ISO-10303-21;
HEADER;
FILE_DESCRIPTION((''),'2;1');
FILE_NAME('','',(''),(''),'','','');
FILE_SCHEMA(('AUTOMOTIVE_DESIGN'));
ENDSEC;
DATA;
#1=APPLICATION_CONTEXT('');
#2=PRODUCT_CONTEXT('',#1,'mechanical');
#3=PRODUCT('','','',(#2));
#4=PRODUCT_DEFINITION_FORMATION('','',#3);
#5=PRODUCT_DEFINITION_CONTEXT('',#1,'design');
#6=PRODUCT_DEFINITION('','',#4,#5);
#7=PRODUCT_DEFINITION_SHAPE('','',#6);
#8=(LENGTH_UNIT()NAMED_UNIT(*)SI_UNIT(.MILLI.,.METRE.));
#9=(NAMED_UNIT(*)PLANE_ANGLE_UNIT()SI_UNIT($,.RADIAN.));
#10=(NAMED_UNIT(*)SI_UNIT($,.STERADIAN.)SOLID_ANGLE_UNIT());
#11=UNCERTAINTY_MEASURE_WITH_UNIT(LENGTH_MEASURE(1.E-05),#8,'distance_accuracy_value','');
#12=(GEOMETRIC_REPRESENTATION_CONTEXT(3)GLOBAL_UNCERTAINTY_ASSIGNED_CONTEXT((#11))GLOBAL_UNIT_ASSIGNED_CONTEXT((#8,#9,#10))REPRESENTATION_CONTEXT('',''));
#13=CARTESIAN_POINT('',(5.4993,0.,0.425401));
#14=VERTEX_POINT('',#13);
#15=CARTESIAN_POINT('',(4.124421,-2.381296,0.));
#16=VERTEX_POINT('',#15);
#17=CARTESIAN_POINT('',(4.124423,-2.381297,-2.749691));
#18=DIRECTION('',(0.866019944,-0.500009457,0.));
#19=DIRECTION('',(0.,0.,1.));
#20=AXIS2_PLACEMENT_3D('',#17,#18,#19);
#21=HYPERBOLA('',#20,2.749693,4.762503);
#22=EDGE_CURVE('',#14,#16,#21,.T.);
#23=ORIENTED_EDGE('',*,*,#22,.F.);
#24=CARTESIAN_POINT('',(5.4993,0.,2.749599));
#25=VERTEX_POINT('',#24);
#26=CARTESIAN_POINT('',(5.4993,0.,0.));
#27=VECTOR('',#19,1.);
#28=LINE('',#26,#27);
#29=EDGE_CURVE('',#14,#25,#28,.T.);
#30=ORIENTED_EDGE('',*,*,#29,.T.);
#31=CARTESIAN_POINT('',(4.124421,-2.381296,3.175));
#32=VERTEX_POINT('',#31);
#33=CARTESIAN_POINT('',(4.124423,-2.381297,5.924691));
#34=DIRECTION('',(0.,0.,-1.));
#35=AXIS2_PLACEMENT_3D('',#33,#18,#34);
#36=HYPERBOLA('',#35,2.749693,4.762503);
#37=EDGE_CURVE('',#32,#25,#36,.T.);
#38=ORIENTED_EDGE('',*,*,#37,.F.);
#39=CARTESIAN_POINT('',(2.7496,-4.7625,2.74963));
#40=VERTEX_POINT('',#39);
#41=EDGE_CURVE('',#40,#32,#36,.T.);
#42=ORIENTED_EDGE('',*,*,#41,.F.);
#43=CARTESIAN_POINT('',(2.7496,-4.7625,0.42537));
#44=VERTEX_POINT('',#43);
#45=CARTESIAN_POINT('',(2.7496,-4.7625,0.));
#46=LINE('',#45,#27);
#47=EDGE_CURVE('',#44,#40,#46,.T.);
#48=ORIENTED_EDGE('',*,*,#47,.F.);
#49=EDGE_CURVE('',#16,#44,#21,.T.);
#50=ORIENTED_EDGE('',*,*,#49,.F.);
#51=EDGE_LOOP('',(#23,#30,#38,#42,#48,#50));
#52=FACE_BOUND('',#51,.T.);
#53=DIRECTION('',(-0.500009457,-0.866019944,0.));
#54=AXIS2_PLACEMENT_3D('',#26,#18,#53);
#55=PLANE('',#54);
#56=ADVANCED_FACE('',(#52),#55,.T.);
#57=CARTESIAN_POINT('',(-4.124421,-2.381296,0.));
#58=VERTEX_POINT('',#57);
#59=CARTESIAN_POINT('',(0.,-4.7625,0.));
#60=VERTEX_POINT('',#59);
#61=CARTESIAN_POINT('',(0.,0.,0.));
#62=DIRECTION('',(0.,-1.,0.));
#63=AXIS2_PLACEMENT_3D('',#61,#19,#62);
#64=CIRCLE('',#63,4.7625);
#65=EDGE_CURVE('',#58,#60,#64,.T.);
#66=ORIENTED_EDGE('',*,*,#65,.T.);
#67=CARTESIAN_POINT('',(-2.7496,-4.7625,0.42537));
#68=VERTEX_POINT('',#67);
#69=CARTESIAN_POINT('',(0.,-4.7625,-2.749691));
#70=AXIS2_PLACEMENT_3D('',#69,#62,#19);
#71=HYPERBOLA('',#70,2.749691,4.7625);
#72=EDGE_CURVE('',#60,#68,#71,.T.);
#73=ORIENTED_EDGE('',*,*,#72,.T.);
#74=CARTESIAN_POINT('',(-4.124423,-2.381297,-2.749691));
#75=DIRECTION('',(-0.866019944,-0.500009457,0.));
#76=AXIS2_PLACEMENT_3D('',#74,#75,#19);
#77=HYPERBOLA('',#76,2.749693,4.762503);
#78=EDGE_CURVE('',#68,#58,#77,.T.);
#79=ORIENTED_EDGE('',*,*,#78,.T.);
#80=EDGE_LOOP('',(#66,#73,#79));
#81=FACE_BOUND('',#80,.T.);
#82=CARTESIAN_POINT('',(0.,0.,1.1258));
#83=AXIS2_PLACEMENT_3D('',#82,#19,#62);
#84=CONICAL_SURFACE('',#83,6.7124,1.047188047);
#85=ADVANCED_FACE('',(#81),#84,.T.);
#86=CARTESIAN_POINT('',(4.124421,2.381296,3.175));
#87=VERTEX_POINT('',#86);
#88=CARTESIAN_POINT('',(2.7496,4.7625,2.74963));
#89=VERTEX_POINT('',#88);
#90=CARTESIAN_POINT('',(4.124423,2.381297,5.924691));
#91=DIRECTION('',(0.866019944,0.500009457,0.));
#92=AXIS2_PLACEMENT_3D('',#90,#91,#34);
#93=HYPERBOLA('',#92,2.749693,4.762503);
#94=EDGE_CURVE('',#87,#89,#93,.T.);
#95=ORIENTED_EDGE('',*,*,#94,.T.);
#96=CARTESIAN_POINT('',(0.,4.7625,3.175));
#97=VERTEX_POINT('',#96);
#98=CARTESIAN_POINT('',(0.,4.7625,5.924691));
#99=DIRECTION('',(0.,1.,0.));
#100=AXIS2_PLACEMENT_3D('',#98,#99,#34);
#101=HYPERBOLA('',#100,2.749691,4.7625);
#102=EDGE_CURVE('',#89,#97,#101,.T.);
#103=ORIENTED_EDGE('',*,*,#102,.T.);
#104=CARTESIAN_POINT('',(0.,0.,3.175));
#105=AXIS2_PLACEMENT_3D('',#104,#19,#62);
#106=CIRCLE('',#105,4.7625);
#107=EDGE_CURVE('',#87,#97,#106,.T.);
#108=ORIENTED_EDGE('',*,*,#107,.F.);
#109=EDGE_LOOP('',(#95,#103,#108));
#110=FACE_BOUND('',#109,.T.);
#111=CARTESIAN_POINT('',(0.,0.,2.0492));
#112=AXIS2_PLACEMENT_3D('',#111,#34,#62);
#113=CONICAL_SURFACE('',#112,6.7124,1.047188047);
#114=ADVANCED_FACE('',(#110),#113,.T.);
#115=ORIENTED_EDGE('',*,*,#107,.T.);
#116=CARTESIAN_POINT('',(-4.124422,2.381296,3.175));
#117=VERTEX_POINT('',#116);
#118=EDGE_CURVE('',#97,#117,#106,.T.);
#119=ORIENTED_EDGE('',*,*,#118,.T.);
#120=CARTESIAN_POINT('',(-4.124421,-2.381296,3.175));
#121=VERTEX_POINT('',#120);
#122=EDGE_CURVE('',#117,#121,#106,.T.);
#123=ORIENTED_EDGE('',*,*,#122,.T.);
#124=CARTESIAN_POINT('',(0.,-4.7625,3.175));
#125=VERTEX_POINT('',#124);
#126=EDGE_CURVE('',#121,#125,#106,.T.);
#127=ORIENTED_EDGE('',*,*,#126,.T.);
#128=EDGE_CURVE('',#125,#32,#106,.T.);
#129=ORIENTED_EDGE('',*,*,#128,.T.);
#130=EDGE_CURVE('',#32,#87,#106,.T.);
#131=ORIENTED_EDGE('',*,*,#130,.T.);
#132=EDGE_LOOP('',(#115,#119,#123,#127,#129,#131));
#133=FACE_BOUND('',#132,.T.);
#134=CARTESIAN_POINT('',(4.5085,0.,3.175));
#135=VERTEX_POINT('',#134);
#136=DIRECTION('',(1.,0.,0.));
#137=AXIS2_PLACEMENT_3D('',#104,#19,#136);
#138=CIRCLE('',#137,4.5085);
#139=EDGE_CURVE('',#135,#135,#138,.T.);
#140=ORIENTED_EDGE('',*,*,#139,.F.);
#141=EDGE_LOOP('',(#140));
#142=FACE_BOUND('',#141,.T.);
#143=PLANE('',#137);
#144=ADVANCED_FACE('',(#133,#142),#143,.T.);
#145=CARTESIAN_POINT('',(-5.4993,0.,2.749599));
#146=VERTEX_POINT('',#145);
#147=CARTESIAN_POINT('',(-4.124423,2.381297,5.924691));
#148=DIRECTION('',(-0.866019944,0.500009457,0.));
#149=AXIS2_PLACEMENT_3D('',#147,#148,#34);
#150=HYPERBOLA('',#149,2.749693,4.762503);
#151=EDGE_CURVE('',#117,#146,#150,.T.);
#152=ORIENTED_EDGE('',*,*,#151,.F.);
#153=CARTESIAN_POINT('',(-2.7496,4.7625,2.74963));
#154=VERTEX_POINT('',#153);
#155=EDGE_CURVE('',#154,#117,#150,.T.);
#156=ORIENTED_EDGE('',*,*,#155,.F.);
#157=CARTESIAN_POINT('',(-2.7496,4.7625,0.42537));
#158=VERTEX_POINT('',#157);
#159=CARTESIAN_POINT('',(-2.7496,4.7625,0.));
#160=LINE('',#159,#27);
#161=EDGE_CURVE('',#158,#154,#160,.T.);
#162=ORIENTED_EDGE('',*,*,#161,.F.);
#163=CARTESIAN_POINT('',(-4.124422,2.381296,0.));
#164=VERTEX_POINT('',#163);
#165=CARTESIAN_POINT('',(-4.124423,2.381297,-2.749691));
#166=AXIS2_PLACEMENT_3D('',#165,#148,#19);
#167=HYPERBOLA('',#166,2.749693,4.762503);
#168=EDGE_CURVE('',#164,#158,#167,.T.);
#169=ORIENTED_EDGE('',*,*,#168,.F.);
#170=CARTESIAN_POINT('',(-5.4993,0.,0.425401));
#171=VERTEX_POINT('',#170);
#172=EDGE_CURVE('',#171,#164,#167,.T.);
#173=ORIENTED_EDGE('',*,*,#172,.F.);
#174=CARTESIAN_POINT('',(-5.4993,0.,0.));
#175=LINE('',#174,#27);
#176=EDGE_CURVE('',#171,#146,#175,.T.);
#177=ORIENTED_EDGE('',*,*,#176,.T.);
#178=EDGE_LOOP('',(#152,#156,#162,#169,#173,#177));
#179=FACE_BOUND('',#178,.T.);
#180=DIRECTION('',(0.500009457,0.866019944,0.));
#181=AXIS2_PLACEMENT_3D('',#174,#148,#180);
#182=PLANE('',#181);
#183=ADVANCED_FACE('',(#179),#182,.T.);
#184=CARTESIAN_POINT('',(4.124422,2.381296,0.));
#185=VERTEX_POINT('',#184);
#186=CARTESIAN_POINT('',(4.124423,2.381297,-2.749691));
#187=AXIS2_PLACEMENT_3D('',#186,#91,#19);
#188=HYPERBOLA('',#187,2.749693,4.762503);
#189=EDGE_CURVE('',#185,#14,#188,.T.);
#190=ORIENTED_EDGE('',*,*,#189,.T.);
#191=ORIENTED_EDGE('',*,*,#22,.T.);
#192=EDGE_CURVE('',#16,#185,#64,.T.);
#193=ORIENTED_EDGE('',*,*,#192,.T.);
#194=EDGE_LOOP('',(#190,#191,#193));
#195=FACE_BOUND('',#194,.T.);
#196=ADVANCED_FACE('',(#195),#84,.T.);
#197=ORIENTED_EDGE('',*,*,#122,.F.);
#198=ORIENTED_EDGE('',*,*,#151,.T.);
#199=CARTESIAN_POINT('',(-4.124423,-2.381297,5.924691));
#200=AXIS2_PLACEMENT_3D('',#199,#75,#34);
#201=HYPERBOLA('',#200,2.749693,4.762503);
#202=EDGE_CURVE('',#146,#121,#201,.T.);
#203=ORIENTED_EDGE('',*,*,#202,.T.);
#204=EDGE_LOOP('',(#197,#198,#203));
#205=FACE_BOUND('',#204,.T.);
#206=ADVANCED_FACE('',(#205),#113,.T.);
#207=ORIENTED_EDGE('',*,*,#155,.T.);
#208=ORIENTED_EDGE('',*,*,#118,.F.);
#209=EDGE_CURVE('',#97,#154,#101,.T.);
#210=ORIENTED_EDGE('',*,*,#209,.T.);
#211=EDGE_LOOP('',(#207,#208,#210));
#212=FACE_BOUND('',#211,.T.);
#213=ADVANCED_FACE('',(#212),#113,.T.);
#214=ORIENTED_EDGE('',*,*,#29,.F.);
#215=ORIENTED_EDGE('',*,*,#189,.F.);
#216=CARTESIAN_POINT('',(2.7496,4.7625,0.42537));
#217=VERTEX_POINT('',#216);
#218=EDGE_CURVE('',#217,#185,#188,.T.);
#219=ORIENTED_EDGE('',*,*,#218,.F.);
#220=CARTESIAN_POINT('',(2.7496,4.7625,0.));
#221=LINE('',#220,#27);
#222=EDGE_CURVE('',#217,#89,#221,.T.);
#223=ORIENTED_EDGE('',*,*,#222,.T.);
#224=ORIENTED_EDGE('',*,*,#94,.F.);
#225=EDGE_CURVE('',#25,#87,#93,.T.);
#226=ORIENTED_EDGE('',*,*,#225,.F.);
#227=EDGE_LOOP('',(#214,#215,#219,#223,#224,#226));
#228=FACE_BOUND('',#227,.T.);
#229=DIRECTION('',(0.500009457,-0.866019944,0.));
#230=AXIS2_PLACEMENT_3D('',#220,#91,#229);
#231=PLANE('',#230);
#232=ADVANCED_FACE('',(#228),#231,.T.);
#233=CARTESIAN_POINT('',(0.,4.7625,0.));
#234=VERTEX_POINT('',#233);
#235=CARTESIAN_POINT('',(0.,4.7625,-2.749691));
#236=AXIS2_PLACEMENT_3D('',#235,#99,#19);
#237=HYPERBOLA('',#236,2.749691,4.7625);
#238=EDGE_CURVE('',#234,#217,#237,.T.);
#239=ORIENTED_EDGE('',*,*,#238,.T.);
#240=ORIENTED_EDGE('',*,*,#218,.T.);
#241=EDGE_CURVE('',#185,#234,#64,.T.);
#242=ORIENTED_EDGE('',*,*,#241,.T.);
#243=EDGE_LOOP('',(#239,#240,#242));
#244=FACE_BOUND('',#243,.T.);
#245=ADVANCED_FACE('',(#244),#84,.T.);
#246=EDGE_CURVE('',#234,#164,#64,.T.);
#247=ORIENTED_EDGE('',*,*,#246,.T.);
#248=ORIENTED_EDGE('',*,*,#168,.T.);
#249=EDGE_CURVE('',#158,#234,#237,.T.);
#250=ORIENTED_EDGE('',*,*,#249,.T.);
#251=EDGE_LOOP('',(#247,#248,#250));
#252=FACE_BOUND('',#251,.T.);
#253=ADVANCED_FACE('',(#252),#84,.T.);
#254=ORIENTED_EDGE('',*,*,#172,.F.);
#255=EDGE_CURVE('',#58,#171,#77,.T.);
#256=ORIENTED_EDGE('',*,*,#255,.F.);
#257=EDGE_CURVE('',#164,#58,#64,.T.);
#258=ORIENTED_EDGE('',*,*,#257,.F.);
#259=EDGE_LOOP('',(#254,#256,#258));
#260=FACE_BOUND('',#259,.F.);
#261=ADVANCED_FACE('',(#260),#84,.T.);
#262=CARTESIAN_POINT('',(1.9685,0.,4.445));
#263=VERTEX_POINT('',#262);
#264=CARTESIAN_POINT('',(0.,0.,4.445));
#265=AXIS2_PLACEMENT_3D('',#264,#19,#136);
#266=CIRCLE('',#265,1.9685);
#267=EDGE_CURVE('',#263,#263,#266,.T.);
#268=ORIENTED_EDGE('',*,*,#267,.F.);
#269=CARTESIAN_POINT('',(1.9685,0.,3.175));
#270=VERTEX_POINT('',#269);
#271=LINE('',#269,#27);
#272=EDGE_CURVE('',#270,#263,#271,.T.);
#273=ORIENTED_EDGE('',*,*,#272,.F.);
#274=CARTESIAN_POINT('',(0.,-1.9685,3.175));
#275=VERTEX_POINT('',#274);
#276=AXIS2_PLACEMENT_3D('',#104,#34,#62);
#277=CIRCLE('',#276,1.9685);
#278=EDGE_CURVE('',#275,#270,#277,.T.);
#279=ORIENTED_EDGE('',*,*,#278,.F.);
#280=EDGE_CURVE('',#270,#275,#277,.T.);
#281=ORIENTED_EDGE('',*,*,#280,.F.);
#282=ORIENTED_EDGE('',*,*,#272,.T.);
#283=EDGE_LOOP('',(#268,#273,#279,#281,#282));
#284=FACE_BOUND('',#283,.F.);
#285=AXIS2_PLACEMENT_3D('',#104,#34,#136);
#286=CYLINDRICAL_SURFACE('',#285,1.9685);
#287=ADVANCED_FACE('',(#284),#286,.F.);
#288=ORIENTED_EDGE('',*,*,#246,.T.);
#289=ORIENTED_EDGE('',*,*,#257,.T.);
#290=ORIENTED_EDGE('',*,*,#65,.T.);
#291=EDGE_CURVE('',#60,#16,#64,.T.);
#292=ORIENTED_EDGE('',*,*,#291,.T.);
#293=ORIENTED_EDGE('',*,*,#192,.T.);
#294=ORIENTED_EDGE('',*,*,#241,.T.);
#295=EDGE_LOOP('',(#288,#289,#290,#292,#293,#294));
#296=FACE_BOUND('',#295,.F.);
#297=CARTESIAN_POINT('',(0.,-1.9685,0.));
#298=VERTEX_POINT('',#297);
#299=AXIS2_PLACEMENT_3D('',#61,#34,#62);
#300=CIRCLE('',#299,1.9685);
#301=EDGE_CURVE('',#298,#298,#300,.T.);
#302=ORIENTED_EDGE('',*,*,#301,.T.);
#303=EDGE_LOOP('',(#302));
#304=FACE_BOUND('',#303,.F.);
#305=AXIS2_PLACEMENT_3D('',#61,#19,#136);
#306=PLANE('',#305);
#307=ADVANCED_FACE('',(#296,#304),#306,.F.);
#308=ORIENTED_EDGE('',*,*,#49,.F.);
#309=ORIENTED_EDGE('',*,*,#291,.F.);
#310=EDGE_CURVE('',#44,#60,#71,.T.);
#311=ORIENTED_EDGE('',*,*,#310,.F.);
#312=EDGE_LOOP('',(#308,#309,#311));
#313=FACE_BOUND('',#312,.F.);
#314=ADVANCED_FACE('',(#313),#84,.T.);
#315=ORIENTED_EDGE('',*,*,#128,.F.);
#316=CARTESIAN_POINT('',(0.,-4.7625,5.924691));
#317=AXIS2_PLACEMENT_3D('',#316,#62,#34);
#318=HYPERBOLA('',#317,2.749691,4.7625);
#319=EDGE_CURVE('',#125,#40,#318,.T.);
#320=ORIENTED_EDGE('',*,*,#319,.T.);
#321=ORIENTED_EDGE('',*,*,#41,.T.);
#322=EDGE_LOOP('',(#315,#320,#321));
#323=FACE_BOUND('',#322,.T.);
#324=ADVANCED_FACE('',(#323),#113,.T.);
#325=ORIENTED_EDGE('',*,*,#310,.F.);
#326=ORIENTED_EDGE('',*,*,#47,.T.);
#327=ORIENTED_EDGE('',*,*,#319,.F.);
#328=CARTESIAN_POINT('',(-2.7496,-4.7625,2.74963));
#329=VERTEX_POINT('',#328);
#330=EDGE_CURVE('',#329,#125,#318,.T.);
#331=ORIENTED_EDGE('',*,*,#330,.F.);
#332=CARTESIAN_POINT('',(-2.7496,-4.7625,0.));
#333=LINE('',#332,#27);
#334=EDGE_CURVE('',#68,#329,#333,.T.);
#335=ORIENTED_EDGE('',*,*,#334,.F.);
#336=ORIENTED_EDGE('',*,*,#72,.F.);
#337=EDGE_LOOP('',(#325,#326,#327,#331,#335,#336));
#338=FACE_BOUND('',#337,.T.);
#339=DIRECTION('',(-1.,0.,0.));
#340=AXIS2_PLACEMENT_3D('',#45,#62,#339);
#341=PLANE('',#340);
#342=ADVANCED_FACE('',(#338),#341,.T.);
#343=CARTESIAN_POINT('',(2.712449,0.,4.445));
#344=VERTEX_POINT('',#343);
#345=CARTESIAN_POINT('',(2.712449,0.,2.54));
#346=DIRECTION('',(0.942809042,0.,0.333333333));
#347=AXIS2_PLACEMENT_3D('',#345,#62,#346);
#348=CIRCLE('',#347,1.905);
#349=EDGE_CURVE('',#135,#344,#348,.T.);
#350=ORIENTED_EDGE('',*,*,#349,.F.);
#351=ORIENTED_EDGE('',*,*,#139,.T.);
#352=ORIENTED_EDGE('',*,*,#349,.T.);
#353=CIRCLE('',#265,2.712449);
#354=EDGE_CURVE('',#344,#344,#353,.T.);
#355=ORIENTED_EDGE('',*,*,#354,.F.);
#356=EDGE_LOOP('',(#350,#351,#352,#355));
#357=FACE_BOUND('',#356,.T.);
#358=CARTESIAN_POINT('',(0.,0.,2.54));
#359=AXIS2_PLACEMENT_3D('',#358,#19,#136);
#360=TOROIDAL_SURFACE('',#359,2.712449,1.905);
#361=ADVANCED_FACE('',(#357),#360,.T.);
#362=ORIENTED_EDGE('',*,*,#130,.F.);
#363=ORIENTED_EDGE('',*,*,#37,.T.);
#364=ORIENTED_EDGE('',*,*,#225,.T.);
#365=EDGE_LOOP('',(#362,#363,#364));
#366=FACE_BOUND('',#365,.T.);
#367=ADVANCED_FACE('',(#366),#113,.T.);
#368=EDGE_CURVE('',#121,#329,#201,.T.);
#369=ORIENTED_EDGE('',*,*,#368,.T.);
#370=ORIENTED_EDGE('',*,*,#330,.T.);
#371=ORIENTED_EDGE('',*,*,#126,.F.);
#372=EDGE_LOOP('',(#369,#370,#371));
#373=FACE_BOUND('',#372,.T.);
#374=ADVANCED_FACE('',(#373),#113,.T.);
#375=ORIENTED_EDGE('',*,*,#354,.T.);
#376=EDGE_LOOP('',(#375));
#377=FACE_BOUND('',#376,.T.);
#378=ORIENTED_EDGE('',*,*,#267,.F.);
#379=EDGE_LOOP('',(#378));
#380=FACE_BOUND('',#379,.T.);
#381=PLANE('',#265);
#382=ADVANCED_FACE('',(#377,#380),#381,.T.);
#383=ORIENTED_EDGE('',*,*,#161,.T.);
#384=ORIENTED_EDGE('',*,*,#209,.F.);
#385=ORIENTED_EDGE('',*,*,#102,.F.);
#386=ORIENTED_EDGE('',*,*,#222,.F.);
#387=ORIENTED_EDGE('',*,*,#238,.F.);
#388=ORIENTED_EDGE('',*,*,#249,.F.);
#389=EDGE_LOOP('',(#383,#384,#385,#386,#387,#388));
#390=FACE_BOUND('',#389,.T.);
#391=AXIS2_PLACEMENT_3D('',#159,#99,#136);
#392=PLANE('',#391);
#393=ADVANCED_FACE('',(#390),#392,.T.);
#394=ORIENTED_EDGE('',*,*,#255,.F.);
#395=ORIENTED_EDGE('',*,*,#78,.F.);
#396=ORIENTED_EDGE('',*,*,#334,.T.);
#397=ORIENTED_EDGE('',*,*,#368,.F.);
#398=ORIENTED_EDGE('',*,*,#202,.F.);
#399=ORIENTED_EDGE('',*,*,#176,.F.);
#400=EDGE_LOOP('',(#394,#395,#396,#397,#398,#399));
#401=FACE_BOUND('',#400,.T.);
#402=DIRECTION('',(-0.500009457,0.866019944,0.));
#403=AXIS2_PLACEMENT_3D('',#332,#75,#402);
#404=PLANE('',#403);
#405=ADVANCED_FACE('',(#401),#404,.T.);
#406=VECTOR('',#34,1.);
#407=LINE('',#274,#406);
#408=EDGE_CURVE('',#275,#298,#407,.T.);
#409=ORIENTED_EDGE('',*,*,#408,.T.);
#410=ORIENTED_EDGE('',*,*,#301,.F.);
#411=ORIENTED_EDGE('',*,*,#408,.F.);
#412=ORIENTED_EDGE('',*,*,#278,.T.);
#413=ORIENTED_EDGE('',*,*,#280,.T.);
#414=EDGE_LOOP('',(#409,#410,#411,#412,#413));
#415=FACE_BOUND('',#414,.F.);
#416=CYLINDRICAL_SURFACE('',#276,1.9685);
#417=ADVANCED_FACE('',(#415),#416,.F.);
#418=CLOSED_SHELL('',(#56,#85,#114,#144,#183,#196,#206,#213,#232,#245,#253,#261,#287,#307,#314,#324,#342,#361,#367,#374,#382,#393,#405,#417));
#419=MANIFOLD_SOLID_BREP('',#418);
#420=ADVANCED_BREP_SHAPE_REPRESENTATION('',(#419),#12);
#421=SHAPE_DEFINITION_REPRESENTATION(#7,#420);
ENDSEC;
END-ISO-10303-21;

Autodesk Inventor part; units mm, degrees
ref_plane "YZ Plane" through (0, 0, 0) normal (1, 0, 0) x (0, 1, 0)
ref_plane "XZ Plane" through (0, 0, 0) normal (0, 1, 0) x (-1, 0, 0)
ref_plane "XY Plane" through (0, 0, 0) normal (0, 0, 1) x (1, 0, 0)
sketch "Sketch1" plane through (0, 0, 0) normal (0, 0, 1) x (1, 0, 0)
  circle A0 centre (0, 0) radius 4.7625 construction
  line L0 (2.7496, 4.7625) -> (5.4993, 0)
  line L1 (5.4993, 0) -> (2.7496, -4.7625)
  line L2 (2.7496, -4.7625) -> (-2.7496, -4.7625)
  line L3 (-2.7496, -4.7625) -> (-5.4993, 0)
  line L4 (-5.4993, 0) -> (-2.7496, 4.7625)
  line L5 (-2.7496, 4.7625) -> (2.7496, 4.7625)
  point P0 (0, 4.7625)
  dimension "d0" = 9.525
extrude "Extrusion1" add sketch "Sketch1" along normal blind 3.175
sketch "Sketch2" plane through (0, 0, 3.175) normal (0, 0, 1) x (1, 0, 0)
  point P0 (0, 0)
hole "Hole1" at (0, 0, 3.175) direction (0, 0, -1) diameter 3.937 end through all thread size "10-24 UNC" class "2B" standard "ANSI Unified Screw Threads"
sketch "Sketch3" plane through (0, 0, 0) normal (1, 0, 0) x (0, 1, 0)
  line L0 (-4.7625, 3.175) -> (0, 3.175) projected
  line L1 (-4.7625, 0) -> (0, 0) projected
  line L2 (-4.7625, 3.175) -> (-6.7124, 3.175)
  line L3 (-6.7124, 3.175) -> (-6.7124, 2.0492)
  line L4 (-6.7124, 2.0492) -> (-4.7625, 3.175)
  line L5 (-4.7625, 0) -> (-6.7124, 0)
  line L6 (-6.7124, 0) -> (-6.7124, 1.1258)
  line L7 (-6.7124, 1.1258) -> (-4.7625, 0)
  line L8 (0, -0.3175) -> (0, 4.1275) projected
  dimension "d10" = 30
  dimension "d11" = 30
revolve "Revolution1" cut sketch "Sketch3" angle 360 about axis through (0, 0, -10) along (0, 0, 1)
sketch "Sketch4" plane through (0, 0, 3.175) normal (0, 0, 1) x (1, 0, 0)
  arc A0 (4.1244, -2.3813) -> (4.1244, 2.3813) centre (0, 0) ccw projected
  arc A1 (4.1244, 2.3813) -> (0, 4.7625) centre (0, 0) ccw projected
  arc A2 (0, 4.7625) -> (-4.1244, 2.3812) centre (0, 0) ccw projected
  arc A3 (-4.1244, 2.3812) -> (-4.1244, -2.3813) centre (0, 0) ccw projected
  arc A4 (-4.1244, -2.3813) -> (0, -4.7625) centre (0, 0) ccw projected
  arc A5 (0, -4.7625) -> (4.1244, -2.3813) centre (0, 0) ccw projected
  circle A6 centre (0, 0) radius 1.9685 projected
  circle A7 centre (0, 0) radius 4.5085
  dimension "d16" = 0.254
extrude "Extrusion2" add sketch "Sketch4" along normal blind 1.27 contours A7
fillet "Fillet1" radius 1.905 1 edges at (-4.5085, 0, 4.445)
equation "\"d10\" = d11"
properties part number "PWTR-0034"
